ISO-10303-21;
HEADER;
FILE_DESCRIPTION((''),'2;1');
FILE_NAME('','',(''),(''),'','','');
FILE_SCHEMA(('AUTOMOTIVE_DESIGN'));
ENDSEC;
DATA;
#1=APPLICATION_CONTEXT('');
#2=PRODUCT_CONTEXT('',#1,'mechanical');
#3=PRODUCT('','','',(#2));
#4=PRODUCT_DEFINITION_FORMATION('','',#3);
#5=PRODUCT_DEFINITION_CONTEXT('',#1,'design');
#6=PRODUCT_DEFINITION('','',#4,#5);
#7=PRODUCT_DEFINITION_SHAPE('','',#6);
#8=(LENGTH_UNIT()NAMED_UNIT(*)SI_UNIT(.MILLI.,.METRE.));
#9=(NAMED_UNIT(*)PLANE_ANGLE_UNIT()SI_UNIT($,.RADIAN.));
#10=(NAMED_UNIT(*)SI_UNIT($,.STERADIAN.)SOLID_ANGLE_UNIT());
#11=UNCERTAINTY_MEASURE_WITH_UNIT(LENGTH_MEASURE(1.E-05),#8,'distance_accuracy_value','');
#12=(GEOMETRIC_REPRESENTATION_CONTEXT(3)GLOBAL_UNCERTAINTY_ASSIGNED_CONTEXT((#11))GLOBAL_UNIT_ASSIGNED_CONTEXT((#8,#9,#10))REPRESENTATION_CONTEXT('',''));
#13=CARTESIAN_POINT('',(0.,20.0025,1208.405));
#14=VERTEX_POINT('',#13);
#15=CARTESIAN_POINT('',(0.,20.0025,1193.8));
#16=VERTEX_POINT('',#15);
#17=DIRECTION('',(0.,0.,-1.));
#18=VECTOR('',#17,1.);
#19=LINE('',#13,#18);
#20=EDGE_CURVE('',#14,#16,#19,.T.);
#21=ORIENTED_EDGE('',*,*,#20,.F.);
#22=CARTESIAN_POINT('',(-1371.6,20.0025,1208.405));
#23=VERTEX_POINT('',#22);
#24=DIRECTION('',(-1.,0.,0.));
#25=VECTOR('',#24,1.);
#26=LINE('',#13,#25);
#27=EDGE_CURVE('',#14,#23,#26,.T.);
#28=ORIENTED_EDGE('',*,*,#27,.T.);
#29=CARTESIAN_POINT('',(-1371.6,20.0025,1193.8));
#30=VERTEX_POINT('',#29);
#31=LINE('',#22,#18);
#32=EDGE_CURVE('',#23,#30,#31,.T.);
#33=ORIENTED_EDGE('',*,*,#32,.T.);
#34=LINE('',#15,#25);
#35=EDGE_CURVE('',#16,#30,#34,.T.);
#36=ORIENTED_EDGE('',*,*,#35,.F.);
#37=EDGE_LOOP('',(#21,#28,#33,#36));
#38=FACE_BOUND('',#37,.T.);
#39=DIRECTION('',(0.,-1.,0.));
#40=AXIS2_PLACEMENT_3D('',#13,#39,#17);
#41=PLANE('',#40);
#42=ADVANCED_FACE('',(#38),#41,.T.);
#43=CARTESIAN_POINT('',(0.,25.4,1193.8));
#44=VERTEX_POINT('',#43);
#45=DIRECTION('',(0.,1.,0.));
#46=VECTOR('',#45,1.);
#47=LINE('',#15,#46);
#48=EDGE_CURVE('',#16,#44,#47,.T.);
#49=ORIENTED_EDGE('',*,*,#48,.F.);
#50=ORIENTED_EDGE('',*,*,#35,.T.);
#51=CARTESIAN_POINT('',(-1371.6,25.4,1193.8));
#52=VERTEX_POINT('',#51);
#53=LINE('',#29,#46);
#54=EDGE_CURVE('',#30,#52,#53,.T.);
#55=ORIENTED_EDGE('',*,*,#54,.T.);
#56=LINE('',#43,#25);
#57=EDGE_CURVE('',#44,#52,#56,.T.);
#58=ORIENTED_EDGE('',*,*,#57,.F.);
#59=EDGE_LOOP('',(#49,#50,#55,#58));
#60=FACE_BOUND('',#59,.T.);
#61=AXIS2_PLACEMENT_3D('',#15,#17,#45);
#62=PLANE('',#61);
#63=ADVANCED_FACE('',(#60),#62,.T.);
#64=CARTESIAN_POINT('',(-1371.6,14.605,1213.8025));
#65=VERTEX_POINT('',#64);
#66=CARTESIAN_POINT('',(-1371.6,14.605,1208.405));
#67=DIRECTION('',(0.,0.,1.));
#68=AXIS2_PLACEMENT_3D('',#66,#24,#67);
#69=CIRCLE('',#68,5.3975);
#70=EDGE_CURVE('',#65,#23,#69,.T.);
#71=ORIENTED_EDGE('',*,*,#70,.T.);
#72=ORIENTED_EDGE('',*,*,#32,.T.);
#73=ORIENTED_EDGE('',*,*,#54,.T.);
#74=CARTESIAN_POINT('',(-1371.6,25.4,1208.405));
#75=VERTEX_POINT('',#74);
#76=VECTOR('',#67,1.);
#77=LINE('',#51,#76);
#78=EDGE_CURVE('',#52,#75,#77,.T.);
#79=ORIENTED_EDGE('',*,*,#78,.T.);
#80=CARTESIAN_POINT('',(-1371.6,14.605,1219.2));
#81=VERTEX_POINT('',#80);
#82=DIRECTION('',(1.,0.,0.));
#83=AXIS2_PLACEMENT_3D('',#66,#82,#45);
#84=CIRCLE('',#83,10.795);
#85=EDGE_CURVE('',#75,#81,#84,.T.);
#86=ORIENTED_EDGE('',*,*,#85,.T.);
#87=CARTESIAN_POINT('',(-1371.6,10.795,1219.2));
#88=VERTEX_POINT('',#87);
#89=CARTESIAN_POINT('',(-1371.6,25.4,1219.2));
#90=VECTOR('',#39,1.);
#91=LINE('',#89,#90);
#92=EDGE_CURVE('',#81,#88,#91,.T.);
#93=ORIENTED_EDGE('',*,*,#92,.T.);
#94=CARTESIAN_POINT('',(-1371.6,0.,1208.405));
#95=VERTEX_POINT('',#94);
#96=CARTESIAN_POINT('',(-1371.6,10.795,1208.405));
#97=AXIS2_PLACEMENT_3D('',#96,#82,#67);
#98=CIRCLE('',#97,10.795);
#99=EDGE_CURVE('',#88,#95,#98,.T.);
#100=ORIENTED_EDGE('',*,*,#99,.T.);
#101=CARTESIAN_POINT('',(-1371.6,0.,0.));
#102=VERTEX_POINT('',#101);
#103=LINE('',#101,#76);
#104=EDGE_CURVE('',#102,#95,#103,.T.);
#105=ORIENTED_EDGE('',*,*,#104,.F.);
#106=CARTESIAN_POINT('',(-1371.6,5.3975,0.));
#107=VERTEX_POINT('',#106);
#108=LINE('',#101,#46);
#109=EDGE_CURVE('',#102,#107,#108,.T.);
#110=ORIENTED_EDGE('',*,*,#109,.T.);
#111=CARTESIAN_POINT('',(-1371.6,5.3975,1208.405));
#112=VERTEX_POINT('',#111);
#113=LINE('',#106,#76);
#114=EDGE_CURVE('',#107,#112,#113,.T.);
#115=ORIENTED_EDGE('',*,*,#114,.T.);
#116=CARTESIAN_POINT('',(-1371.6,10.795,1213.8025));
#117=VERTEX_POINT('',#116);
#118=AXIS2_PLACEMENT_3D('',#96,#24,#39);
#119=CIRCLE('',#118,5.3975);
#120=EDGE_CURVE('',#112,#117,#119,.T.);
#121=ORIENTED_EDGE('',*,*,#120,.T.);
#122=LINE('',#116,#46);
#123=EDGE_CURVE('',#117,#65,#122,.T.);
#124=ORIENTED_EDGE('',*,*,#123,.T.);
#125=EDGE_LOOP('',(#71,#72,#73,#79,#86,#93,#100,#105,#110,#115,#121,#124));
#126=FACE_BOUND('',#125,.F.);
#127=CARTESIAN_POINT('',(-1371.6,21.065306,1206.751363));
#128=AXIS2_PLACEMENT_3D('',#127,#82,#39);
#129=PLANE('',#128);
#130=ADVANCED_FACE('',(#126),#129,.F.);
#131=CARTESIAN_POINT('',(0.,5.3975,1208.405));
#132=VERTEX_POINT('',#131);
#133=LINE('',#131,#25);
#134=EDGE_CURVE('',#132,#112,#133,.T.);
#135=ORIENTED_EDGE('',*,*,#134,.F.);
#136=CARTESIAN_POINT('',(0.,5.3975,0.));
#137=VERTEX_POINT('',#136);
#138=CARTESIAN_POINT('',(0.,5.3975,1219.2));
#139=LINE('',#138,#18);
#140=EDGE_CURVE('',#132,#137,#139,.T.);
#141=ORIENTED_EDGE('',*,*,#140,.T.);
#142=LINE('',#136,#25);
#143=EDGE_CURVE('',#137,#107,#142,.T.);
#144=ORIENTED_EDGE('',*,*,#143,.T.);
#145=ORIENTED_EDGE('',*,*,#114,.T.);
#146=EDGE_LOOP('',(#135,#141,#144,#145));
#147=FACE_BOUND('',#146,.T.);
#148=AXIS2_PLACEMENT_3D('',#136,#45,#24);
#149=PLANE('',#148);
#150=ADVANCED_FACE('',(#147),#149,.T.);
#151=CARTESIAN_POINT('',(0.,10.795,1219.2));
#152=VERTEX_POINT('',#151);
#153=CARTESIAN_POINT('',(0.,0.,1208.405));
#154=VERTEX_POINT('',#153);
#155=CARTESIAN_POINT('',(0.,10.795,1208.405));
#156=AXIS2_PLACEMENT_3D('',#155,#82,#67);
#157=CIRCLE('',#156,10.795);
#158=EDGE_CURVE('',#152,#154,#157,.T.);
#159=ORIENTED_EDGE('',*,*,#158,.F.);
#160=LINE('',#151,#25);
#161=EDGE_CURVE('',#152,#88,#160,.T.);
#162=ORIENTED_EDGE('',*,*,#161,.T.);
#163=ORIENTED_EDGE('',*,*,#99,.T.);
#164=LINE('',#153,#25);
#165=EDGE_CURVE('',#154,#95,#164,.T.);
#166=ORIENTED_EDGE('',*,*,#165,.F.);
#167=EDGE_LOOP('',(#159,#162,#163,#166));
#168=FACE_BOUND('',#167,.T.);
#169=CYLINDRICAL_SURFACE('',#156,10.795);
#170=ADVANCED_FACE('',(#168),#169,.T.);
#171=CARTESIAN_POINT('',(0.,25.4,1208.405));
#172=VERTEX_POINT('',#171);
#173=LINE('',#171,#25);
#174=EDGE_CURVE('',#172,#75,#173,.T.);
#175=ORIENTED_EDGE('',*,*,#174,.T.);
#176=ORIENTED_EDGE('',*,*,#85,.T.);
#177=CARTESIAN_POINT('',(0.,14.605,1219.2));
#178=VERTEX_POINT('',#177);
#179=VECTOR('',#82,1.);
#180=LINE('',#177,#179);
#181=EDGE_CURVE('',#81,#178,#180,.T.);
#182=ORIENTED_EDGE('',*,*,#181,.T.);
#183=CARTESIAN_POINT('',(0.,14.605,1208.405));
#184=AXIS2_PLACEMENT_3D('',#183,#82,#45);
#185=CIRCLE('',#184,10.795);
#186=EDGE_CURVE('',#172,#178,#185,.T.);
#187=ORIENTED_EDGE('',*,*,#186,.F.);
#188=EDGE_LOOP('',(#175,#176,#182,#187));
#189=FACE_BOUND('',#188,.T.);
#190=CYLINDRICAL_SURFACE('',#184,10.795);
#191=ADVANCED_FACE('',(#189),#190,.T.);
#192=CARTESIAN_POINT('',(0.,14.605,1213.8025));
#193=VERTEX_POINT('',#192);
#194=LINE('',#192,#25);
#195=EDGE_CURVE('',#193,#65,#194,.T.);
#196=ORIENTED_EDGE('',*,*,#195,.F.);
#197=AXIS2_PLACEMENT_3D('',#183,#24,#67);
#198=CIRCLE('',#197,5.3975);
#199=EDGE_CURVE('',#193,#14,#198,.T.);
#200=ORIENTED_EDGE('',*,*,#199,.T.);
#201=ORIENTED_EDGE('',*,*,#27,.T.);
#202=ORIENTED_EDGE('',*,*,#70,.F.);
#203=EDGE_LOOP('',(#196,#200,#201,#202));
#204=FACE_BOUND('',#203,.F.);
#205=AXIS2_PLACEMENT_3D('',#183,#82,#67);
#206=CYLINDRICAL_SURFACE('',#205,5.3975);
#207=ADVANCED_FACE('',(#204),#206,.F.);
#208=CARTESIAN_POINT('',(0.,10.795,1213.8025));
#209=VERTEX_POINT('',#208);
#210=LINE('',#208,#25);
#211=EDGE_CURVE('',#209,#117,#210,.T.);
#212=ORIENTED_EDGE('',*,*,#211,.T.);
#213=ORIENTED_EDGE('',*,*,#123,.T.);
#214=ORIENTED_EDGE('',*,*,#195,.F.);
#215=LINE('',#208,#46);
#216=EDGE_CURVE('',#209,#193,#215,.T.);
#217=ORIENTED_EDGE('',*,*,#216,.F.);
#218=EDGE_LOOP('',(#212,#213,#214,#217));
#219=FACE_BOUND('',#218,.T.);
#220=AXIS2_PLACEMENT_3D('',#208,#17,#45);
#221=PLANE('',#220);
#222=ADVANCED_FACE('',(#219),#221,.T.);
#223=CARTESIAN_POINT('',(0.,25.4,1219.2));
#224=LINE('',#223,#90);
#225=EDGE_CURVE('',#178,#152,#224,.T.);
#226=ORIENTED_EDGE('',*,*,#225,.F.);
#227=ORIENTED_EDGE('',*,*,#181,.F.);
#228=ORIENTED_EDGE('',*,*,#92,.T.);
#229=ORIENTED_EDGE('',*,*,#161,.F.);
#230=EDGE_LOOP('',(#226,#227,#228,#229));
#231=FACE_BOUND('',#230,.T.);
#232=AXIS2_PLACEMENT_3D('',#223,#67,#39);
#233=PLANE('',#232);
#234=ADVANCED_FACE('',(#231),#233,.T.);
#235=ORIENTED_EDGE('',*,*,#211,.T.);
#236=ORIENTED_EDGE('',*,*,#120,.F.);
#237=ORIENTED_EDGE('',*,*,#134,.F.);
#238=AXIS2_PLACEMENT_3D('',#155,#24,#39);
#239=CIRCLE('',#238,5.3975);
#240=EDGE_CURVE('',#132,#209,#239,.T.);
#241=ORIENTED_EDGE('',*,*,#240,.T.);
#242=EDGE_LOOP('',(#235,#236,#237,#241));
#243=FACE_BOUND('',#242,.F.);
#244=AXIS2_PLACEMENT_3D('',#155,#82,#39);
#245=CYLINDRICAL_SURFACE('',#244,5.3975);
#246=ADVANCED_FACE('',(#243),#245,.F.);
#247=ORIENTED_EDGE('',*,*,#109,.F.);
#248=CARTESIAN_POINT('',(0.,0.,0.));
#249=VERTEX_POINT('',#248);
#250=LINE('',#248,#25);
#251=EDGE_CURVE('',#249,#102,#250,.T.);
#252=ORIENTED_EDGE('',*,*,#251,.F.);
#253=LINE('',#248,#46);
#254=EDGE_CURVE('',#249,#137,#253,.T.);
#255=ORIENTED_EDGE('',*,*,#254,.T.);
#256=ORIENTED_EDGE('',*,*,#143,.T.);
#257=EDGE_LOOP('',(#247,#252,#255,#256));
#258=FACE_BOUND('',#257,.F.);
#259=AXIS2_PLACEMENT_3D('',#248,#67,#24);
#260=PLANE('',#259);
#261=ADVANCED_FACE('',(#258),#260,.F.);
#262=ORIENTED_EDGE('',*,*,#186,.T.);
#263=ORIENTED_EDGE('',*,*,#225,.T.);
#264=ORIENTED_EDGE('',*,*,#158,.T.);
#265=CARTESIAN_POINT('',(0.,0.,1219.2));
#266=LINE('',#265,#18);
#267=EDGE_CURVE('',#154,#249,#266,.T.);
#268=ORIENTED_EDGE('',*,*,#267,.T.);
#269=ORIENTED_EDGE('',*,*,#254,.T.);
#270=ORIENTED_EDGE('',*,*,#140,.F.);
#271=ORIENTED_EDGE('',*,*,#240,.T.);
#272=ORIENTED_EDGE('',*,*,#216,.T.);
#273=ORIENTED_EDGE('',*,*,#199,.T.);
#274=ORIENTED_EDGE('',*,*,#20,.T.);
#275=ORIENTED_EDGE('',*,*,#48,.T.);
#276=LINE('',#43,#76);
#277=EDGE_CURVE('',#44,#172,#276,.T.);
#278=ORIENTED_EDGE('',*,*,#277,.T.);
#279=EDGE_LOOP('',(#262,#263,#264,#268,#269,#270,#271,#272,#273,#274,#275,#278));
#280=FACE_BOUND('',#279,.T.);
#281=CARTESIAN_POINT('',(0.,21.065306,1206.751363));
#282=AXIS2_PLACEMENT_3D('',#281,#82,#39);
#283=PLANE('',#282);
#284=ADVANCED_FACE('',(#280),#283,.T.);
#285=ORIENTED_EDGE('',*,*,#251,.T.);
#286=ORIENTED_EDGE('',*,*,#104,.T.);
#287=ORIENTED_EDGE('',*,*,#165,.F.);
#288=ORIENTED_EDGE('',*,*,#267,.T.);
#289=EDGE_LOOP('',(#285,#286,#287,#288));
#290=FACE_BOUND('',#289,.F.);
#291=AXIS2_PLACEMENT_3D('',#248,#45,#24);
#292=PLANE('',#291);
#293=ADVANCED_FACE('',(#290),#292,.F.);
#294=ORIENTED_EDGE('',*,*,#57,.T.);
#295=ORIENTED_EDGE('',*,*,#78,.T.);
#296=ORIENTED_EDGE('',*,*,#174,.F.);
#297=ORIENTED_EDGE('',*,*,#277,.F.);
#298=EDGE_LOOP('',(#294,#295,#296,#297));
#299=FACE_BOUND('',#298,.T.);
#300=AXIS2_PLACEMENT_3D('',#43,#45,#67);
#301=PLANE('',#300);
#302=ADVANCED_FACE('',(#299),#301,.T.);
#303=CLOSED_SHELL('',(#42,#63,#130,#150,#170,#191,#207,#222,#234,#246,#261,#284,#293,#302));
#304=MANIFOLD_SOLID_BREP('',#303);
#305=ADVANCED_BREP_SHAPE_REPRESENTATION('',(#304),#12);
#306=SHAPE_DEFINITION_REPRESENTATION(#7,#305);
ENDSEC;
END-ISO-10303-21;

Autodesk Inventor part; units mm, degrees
ref_plane "YZ Plane" through (0, 0, 0) normal (1, 0, 0) x (0, 1, 0)
ref_plane "XZ Plane" through (0, 0, 0) normal (0, 1, 0) x (-1, 0, 0)
ref_plane "XY Plane" through (0, 0, 0) normal (0, 0, 1) x (1, 0, 0)
sketch "Sketch1" plane through (0, 0, 0) normal (0, 1, 0) x (-1, 0, 0)
  line L0 (0, 0) -> (1371.6, 0)
  line L1 (1371.6, 0) -> (1371.6, 1219.2)
  line L2 (1371.6, 1219.2) -> (0, 1219.2)
  line L3 (0, 1219.2) -> (0, 0)
  dimension "d0" = 1371.6
  dimension "d1" = 1219.2
extrude "Plate1" add sketch "Sketch1" along normal blind 5.3975
sketch "Sketch2" plane through (0, 0, 1213.8025) normal (0, 0, 1) x (1, 0, 0)
  line L0 (-1371.6, 0) -> (0, 0)
  line L1 (0, 0) -> (0, 25.4)
  line L2 (0, 25.4) -> (-1371.6, 25.4)
  line L3 (-1371.6, 25.4) -> (-1371.6, 0)
edge flange "Flange1" height 25.4 angle 90 thickness 5.3975 bend radius 5.3975 thickness toward (0, 0, 1) relief tear relief width 5.3975 relief depth 2.6987 edges at (-685.8, 5.3975, 1219.2) wall of the first edge with corners at (-1371.6, 0, 1213.8025) (0, 0, 1213.8025) (0, 25.4, 1213.8025) (-1371.6, 25.4, 1213.8025)
bend "Bend1"
corner "Corner1"
sketch "Sketch3" plane through (0, 20.0025, 1219.2) normal (0, 1, 0) x (-1, 0, 0)
  line L0 (1371.6, 0) -> (0, 0)
  line L1 (0, 0) -> (0, -25.4)
  line L2 (0, -25.4) -> (1371.6, -25.4)
  line L3 (1371.6, -25.4) -> (1371.6, 0)
edge flange "Flange2" height 25.4 angle 90 thickness 5.3975 bend radius 5.3975 thickness toward (0, 1, 0) relief tear relief width 5.3975 relief depth 2.6987 edges at (-685.8, 25.4, 1213.8025) wall of the first edge with corners at (-1371.6, 20.0025, 1219.2) (0, 20.0025, 1219.2) (0, 20.0025, 1193.8) (-1371.6, 20.0025, 1193.8)
bend "Bend2"
corner "Corner2"
equation "\"d3\" = BendReliefWidth"
equation "\"d4\" = BendReliefDepth"
equation "\"d5\" = MinimumRemnant"
equation "\"d6\" = BendRadius"
equation "\"d9\" = BendRadius"
equation "\"d10\" = CornerReliefSize"
equation "\"d11\" = GapSize"
equation "\"d12\" = JacobiRadiusSize"
equation "\"d13\" = BendReliefWidth"
equation "\"d14\" = BendReliefDepth"
equation "\"d15\" = MinimumRemnant"
equation "\"d16\" = BendRadius"
equation "\"d19\" = BendRadius"
equation "\"d20\" = CornerReliefSize"
equation "\"d21\" = GapSize"
equation "\"d22\" = JacobiRadiusSize"
equation "\"BendRadius\" = Thickness"
equation "\"BendReliefWidth\" = Thickness"
equation "\"BendReliefDepth\" = 0.5 * Thickness"
equation "\"CornerReliefSize\" = 4 * Thickness"
equation "\"MinimumRemnant\" = 2 * Thickness"
equation "\"TransitionRadius\" = BendRadius"
equation "\"JacobiRadiusSize\" = BendRadius"
equation "\"GapSize\" = Thickness"
equation "\"d2\" = BendRadius"
equation "\"Thickness\" = 5.3975"
properties material "Polycarbonate, Clear"
